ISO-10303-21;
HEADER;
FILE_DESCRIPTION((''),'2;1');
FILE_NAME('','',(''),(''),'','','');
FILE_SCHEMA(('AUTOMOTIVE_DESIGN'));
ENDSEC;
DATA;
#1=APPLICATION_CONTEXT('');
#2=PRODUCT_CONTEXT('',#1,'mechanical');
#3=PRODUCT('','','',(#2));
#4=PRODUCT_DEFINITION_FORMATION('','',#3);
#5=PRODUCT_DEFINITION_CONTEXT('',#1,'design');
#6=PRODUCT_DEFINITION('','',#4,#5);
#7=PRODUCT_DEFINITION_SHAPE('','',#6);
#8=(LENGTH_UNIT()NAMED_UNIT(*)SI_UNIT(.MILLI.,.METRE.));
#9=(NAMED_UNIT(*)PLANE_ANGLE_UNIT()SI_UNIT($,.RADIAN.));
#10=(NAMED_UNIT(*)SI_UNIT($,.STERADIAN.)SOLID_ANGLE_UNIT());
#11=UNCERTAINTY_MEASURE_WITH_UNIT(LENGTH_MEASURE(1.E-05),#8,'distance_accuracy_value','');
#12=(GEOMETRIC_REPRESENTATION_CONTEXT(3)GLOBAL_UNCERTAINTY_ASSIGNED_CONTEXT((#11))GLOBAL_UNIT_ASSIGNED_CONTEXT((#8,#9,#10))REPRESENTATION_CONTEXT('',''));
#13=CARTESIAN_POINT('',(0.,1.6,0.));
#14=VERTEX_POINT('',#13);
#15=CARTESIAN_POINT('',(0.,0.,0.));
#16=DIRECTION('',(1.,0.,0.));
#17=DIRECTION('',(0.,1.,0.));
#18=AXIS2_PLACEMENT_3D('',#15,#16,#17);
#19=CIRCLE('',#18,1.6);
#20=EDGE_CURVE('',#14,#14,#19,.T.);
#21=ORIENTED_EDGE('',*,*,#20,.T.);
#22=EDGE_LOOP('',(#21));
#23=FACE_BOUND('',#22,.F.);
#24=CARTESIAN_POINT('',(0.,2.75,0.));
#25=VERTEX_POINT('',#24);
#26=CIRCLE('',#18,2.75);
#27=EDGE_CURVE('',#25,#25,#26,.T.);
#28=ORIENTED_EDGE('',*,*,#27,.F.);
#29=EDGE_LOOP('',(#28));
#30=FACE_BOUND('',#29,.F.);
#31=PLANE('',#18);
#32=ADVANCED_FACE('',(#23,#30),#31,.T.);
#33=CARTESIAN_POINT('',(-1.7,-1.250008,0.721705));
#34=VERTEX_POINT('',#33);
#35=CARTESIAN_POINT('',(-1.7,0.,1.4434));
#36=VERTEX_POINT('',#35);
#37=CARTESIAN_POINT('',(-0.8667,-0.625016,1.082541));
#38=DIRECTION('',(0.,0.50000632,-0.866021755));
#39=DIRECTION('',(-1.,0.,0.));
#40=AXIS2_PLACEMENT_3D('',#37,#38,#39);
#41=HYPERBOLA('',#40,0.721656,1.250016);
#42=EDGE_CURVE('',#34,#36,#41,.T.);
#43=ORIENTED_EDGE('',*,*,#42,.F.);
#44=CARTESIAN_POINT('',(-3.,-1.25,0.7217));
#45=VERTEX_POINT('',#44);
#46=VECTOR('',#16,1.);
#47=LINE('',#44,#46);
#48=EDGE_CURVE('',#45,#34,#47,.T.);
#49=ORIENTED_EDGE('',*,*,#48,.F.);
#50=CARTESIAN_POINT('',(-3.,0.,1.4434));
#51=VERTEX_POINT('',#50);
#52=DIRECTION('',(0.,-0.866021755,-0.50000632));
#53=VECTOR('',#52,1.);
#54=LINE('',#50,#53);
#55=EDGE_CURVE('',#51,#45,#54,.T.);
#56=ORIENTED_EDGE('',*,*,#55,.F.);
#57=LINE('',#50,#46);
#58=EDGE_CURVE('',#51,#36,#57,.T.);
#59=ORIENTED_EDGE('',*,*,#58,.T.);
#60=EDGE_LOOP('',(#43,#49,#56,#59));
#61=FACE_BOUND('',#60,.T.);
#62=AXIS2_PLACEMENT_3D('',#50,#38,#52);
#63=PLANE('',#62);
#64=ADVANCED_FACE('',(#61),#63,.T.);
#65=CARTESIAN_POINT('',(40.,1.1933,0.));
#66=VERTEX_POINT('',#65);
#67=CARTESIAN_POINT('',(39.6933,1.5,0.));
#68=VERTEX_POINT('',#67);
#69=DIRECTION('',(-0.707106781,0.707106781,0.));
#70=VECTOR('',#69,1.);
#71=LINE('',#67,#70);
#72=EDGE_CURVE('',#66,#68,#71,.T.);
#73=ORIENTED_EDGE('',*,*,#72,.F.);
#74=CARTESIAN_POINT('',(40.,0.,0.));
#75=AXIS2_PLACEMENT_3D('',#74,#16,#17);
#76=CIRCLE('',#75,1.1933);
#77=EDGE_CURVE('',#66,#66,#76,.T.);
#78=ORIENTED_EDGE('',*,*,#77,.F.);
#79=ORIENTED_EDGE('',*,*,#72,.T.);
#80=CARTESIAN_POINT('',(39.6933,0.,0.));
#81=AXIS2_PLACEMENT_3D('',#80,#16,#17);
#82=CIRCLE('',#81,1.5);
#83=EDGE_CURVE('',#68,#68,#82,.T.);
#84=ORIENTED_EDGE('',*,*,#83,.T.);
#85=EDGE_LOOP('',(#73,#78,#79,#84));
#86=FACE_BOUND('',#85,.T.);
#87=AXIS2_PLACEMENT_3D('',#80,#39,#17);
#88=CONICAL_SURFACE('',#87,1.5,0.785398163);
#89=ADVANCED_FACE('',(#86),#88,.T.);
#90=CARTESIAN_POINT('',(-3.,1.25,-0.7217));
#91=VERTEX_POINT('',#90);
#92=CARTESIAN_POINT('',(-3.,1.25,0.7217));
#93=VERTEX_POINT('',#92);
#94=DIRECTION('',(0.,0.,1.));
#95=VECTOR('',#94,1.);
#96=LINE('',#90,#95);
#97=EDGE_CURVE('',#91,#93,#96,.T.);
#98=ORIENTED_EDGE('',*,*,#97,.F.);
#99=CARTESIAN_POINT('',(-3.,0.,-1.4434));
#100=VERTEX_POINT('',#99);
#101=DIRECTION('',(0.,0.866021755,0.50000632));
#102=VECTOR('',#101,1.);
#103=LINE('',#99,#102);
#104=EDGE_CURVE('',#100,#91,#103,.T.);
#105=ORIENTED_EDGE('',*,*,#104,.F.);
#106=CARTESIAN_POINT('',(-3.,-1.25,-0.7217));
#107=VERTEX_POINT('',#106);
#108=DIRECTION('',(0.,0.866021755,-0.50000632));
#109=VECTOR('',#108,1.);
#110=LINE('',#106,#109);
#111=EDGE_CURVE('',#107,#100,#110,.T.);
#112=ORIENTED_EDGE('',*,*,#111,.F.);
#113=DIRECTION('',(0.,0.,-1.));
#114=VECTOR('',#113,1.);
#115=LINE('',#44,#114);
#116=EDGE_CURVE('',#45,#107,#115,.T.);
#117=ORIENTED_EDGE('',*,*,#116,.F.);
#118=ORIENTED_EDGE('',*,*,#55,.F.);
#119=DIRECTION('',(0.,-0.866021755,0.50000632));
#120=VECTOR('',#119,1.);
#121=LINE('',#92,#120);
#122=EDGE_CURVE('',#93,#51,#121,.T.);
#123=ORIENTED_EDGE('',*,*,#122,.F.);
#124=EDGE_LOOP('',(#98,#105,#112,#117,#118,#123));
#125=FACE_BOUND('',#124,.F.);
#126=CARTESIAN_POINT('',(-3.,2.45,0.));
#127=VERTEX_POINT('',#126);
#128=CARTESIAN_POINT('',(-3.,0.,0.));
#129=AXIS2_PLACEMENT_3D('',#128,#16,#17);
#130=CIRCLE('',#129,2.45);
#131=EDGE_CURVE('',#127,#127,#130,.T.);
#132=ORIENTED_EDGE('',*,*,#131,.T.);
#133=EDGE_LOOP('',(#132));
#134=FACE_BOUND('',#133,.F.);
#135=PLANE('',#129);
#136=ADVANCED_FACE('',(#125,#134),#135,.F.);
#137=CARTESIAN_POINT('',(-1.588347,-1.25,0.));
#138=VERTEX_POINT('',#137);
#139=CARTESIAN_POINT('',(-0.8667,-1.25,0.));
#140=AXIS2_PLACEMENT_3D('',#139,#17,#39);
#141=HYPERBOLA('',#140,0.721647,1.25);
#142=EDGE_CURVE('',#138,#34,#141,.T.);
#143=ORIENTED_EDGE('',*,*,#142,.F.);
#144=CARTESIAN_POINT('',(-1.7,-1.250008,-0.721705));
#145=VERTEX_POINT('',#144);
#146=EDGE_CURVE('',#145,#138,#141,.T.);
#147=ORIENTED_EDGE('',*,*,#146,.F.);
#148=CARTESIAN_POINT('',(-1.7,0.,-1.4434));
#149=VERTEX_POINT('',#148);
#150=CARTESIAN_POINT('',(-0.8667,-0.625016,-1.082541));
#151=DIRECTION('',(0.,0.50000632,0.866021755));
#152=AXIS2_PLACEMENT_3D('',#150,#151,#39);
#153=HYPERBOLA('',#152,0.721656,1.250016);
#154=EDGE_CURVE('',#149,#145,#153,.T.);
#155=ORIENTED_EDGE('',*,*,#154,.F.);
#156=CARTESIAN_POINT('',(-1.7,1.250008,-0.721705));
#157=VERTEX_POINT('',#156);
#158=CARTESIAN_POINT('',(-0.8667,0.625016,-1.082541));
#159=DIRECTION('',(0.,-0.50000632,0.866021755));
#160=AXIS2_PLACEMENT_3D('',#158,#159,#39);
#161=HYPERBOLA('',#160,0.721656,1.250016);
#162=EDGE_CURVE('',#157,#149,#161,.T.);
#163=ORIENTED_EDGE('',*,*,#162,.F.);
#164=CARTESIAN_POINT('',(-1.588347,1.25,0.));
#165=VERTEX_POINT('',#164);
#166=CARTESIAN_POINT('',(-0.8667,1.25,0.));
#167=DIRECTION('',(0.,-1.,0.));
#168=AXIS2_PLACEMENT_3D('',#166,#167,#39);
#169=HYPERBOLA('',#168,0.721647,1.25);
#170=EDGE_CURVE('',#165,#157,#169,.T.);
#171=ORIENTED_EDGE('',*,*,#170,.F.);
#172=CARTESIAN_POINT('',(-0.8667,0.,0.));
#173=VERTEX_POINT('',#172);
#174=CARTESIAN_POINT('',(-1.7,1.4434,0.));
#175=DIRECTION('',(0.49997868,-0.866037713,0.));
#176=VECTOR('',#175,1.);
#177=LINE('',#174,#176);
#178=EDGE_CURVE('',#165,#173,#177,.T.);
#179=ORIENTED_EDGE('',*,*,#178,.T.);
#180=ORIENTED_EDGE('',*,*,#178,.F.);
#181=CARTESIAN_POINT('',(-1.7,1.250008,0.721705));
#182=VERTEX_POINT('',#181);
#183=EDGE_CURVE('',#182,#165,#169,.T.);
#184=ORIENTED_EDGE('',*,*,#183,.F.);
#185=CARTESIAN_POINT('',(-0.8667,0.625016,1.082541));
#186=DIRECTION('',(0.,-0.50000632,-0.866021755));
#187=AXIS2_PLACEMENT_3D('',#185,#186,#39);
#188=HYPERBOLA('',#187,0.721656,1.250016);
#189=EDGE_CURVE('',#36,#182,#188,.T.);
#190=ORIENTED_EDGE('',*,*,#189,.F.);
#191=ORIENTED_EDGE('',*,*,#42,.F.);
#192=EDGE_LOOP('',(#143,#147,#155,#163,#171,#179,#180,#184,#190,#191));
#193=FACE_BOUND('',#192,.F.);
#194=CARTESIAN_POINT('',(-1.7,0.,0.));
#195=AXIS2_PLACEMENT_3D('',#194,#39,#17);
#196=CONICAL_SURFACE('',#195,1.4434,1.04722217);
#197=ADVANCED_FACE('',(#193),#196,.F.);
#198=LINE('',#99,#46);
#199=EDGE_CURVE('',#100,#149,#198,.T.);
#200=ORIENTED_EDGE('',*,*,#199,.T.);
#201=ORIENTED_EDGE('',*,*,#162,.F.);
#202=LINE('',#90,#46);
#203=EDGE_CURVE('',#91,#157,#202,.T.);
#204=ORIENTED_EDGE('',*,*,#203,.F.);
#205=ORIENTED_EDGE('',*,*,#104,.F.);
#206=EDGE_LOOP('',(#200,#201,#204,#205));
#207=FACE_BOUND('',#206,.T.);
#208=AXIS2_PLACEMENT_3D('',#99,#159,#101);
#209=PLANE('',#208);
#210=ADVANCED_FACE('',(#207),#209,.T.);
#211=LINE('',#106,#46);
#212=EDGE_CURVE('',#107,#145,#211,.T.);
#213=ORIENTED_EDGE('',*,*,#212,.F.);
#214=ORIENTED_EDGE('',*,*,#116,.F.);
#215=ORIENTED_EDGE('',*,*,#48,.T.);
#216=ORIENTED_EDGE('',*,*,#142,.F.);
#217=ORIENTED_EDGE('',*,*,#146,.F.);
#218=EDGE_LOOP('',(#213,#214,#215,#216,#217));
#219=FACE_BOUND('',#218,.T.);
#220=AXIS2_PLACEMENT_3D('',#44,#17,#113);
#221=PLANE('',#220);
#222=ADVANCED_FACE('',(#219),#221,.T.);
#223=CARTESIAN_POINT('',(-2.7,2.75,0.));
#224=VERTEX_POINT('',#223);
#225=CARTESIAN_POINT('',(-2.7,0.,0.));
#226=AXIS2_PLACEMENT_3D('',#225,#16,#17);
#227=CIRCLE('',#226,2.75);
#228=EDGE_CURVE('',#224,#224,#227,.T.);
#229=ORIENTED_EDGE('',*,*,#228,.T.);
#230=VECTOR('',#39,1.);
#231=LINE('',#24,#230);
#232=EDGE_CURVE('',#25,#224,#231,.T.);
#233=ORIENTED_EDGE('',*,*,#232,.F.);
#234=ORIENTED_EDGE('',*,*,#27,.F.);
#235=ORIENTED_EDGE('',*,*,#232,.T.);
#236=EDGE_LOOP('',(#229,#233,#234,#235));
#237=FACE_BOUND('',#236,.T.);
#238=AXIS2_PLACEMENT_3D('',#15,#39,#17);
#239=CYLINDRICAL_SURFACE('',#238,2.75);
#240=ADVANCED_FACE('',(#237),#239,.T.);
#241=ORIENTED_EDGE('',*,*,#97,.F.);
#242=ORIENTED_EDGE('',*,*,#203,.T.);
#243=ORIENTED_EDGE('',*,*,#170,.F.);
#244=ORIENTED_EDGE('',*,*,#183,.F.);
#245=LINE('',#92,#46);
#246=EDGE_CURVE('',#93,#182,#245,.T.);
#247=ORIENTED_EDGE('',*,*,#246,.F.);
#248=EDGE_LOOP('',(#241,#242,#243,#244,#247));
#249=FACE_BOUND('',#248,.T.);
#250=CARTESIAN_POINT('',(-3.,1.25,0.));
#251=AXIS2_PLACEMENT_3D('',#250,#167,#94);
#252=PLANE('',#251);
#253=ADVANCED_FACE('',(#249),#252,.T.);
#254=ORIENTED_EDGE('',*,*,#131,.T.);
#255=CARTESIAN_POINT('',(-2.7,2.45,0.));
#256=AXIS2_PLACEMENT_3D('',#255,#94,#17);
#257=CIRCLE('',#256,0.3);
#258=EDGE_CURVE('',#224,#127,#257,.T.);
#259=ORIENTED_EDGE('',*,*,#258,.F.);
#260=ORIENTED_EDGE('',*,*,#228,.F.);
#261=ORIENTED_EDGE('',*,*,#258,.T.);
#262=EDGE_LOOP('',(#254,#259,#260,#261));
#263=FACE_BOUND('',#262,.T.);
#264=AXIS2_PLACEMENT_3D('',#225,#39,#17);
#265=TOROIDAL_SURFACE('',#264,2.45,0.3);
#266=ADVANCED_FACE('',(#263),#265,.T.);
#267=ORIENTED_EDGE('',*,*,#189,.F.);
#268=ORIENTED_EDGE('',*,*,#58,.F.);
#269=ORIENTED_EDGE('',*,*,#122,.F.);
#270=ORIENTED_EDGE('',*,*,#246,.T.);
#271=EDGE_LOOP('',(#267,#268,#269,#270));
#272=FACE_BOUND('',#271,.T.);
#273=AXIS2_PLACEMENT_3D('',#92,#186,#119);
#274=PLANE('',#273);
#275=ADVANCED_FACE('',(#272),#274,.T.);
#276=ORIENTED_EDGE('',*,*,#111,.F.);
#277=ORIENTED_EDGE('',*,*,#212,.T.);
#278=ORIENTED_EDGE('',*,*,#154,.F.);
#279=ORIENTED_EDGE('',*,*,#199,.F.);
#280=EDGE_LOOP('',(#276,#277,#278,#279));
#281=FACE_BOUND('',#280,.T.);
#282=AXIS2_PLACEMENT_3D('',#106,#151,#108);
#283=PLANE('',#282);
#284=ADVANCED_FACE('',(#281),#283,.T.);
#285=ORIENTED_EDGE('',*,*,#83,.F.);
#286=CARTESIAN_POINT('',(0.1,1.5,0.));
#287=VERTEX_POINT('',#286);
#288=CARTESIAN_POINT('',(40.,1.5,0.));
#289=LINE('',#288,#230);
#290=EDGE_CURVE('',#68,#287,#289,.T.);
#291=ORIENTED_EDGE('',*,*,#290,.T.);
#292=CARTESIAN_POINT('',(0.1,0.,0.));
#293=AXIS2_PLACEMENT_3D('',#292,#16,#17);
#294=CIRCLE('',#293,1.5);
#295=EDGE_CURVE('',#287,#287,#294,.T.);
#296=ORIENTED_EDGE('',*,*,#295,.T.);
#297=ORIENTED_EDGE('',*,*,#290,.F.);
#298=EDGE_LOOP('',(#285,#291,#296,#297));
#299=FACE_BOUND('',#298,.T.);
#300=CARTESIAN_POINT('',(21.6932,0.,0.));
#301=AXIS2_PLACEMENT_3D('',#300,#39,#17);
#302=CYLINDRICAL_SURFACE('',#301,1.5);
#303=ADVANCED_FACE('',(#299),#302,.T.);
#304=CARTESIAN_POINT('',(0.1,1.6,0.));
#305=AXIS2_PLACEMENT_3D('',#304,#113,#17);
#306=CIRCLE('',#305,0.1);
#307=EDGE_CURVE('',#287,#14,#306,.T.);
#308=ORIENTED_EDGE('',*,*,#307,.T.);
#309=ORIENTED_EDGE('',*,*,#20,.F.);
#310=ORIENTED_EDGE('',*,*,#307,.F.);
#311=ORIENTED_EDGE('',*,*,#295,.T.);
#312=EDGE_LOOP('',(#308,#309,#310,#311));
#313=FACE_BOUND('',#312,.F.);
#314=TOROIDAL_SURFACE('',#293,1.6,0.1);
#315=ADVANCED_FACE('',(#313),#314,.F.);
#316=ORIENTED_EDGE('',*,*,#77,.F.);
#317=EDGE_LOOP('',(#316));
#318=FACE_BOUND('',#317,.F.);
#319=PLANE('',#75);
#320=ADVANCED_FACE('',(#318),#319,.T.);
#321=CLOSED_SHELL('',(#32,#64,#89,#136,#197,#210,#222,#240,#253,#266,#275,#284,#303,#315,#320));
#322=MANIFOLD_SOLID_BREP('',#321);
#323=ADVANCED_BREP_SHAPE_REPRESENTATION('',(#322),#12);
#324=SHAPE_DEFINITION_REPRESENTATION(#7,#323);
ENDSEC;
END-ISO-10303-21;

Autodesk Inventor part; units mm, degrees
ref_plane "YZ Plane" through (0, 0, 0) normal (1, 0, 0) x (0, 1, 0)
ref_plane "XZ Plane" through (0, 0, 0) normal (0, 1, 0) x (-1, 0, 0)
sketch "Sketch1" plane through (0, 0, 0) normal (0, 0, 1) x (1, 0, 0)
  line L0 (-0.8667, 0) -> (40, 0)
  line L1 (40, 0) -> (40, 1.5)
  line L2 (40, 1.5) -> (22, 1.5)
  line L3 (22, 1.5) -> (21.6932, 1.5)
  line L4 (21.6932, 1.5) -> (0, 1.5)
  line L5 (0, 1.5) -> (0, 2.75)
  line L6 (0, 2.75) -> (-3, 2.75)
  line L7 (-3, 2.75) -> (-3, 1.4434)
  line L8 (-3, 1.4434) -> (-1.7, 1.4434)
  line L9 (-1.7, 1.4434) -> (-0.8667, 0)
  line L10 (-8.6, 0) -> (30.6, 0) projected
  line L11 (0, -0.55) -> (0, 3.3) projected
  line L12 (22, 1.5) -> (0, 1.5) construction
  dimension "d1" = 18
  dimension "d2" = 0.3068
  dimension "d3" = 3
  dimension "d4" = 1.3
  dimension "d5" = 60
  dimension "d6" = 3
  dimension "d7" = 3
  dimension "d8" = 2.8868
  dimension "d9" = 5.5
  dimension "d26" = 40
revolve "Body" add sketch "Sketch1" angle 360 about axis through (-0.8667, 0, 0) along (1, 0, 0)
sketch "Sketch2" plane through (-3, 0, 0) normal (-1, 0, 0) x (0, 0, 1)
  circle A0 centre (0, 0) radius 1.4434 projected
  line L0 (0, -3.85) -> (0, 3.85) projected
  line L1 (-3.85, 0) -> (3.85, 0) projected
  line L2 (1.4434, 0) -> (0.7217, -1.25)
  line L3 (0.7217, -1.25) -> (-0.7217, -1.25)
  line L4 (-0.7217, -1.25) -> (-1.4434, 0)
  line L5 (-1.4434, 0) -> (-0.7217, 1.25)
  line L6 (-0.7217, 1.25) -> (0.7217, 1.25)
  line L7 (0.7217, 1.25) -> (1.4434, 0)
extrude "Slot" add sketch "Sketch2" against normal up to next contours L7 A0 | A0 L2 | L6 L0 A0 | A0 L0 L3 | L0 L6 A0 | A0 L3 L0 | L4 A0 | A0 L5
fillet "Fillet1" radius 0.3 1 edges at (-3, -2.75, 0)
thread "Thread" size "M3x0.5" class "6g" standard "ISO Metric profile" length 18
chamfer "Chamfer1" distance 0.3067 distance2 0.3067 1 edges at (40, -1.5, 0) measured on face at (40, -0.1088, 0.5667)
ref_plane "Work Plane1" through (29, 0, 0) normal (0, -1, 0) x (1, 0, 0)
fillet "Fillet2" radius 0.1 1 edges at (0, -1.5, 0)
equation "\"d30\" = R"
equation "\"d17\" = RR"
equation "\"d13\" = GEL"
equation "\"d15\" = -0.5 * SPD + 0.5 * GD"
equation "\"d16\" = GUL"
equation "\"d1\" = GEL"
equation "\"d3\" = KOH"
equation "\"d4\" = INTI"
equation "\"d6\" = GD"
equation "\"d7\" = BDM"
equation "\"d8\" = 1.1547 * SW"
equation "\"d9\" = KOD"
equation "\"d26\" = NLG"
equation "\"GD\" = 3"
equation "\"NLG\" = 40"
equation "\"GEL\" = 18"
equation "\"KOD\" = 5.5"
equation "\"KOH\" = 3"
equation "\"INTI\" = 1.3"
equation "\"GAL\" = 0.61345 * PTC"
equation "\"GUL\" = 0.61345 * PTC"
equation "\"BDM\" = NND"
equation "\"SW\" = 2.5"
equation "\"RR\" = 0.3"
equation "\"SPD\" = NND - 1.2269 * PTC"
equation "\"R\" = 0.1"
equation "\"TOA\" = 30deg"
equation "\"GD1\" = THREADDIA - 1.2269 * PTC"
equation "\"THREADDIA\" = 3"
equation "\"FAWI\" = 45deg"
equation "\"PTC\" = 0.5"
equation "\"NND\" = 3"
equation "\"E0\" = 1.155 * SW"
properties part number "ISO 4762 - M3 x 40" material "Stainless Steel, 440C"
